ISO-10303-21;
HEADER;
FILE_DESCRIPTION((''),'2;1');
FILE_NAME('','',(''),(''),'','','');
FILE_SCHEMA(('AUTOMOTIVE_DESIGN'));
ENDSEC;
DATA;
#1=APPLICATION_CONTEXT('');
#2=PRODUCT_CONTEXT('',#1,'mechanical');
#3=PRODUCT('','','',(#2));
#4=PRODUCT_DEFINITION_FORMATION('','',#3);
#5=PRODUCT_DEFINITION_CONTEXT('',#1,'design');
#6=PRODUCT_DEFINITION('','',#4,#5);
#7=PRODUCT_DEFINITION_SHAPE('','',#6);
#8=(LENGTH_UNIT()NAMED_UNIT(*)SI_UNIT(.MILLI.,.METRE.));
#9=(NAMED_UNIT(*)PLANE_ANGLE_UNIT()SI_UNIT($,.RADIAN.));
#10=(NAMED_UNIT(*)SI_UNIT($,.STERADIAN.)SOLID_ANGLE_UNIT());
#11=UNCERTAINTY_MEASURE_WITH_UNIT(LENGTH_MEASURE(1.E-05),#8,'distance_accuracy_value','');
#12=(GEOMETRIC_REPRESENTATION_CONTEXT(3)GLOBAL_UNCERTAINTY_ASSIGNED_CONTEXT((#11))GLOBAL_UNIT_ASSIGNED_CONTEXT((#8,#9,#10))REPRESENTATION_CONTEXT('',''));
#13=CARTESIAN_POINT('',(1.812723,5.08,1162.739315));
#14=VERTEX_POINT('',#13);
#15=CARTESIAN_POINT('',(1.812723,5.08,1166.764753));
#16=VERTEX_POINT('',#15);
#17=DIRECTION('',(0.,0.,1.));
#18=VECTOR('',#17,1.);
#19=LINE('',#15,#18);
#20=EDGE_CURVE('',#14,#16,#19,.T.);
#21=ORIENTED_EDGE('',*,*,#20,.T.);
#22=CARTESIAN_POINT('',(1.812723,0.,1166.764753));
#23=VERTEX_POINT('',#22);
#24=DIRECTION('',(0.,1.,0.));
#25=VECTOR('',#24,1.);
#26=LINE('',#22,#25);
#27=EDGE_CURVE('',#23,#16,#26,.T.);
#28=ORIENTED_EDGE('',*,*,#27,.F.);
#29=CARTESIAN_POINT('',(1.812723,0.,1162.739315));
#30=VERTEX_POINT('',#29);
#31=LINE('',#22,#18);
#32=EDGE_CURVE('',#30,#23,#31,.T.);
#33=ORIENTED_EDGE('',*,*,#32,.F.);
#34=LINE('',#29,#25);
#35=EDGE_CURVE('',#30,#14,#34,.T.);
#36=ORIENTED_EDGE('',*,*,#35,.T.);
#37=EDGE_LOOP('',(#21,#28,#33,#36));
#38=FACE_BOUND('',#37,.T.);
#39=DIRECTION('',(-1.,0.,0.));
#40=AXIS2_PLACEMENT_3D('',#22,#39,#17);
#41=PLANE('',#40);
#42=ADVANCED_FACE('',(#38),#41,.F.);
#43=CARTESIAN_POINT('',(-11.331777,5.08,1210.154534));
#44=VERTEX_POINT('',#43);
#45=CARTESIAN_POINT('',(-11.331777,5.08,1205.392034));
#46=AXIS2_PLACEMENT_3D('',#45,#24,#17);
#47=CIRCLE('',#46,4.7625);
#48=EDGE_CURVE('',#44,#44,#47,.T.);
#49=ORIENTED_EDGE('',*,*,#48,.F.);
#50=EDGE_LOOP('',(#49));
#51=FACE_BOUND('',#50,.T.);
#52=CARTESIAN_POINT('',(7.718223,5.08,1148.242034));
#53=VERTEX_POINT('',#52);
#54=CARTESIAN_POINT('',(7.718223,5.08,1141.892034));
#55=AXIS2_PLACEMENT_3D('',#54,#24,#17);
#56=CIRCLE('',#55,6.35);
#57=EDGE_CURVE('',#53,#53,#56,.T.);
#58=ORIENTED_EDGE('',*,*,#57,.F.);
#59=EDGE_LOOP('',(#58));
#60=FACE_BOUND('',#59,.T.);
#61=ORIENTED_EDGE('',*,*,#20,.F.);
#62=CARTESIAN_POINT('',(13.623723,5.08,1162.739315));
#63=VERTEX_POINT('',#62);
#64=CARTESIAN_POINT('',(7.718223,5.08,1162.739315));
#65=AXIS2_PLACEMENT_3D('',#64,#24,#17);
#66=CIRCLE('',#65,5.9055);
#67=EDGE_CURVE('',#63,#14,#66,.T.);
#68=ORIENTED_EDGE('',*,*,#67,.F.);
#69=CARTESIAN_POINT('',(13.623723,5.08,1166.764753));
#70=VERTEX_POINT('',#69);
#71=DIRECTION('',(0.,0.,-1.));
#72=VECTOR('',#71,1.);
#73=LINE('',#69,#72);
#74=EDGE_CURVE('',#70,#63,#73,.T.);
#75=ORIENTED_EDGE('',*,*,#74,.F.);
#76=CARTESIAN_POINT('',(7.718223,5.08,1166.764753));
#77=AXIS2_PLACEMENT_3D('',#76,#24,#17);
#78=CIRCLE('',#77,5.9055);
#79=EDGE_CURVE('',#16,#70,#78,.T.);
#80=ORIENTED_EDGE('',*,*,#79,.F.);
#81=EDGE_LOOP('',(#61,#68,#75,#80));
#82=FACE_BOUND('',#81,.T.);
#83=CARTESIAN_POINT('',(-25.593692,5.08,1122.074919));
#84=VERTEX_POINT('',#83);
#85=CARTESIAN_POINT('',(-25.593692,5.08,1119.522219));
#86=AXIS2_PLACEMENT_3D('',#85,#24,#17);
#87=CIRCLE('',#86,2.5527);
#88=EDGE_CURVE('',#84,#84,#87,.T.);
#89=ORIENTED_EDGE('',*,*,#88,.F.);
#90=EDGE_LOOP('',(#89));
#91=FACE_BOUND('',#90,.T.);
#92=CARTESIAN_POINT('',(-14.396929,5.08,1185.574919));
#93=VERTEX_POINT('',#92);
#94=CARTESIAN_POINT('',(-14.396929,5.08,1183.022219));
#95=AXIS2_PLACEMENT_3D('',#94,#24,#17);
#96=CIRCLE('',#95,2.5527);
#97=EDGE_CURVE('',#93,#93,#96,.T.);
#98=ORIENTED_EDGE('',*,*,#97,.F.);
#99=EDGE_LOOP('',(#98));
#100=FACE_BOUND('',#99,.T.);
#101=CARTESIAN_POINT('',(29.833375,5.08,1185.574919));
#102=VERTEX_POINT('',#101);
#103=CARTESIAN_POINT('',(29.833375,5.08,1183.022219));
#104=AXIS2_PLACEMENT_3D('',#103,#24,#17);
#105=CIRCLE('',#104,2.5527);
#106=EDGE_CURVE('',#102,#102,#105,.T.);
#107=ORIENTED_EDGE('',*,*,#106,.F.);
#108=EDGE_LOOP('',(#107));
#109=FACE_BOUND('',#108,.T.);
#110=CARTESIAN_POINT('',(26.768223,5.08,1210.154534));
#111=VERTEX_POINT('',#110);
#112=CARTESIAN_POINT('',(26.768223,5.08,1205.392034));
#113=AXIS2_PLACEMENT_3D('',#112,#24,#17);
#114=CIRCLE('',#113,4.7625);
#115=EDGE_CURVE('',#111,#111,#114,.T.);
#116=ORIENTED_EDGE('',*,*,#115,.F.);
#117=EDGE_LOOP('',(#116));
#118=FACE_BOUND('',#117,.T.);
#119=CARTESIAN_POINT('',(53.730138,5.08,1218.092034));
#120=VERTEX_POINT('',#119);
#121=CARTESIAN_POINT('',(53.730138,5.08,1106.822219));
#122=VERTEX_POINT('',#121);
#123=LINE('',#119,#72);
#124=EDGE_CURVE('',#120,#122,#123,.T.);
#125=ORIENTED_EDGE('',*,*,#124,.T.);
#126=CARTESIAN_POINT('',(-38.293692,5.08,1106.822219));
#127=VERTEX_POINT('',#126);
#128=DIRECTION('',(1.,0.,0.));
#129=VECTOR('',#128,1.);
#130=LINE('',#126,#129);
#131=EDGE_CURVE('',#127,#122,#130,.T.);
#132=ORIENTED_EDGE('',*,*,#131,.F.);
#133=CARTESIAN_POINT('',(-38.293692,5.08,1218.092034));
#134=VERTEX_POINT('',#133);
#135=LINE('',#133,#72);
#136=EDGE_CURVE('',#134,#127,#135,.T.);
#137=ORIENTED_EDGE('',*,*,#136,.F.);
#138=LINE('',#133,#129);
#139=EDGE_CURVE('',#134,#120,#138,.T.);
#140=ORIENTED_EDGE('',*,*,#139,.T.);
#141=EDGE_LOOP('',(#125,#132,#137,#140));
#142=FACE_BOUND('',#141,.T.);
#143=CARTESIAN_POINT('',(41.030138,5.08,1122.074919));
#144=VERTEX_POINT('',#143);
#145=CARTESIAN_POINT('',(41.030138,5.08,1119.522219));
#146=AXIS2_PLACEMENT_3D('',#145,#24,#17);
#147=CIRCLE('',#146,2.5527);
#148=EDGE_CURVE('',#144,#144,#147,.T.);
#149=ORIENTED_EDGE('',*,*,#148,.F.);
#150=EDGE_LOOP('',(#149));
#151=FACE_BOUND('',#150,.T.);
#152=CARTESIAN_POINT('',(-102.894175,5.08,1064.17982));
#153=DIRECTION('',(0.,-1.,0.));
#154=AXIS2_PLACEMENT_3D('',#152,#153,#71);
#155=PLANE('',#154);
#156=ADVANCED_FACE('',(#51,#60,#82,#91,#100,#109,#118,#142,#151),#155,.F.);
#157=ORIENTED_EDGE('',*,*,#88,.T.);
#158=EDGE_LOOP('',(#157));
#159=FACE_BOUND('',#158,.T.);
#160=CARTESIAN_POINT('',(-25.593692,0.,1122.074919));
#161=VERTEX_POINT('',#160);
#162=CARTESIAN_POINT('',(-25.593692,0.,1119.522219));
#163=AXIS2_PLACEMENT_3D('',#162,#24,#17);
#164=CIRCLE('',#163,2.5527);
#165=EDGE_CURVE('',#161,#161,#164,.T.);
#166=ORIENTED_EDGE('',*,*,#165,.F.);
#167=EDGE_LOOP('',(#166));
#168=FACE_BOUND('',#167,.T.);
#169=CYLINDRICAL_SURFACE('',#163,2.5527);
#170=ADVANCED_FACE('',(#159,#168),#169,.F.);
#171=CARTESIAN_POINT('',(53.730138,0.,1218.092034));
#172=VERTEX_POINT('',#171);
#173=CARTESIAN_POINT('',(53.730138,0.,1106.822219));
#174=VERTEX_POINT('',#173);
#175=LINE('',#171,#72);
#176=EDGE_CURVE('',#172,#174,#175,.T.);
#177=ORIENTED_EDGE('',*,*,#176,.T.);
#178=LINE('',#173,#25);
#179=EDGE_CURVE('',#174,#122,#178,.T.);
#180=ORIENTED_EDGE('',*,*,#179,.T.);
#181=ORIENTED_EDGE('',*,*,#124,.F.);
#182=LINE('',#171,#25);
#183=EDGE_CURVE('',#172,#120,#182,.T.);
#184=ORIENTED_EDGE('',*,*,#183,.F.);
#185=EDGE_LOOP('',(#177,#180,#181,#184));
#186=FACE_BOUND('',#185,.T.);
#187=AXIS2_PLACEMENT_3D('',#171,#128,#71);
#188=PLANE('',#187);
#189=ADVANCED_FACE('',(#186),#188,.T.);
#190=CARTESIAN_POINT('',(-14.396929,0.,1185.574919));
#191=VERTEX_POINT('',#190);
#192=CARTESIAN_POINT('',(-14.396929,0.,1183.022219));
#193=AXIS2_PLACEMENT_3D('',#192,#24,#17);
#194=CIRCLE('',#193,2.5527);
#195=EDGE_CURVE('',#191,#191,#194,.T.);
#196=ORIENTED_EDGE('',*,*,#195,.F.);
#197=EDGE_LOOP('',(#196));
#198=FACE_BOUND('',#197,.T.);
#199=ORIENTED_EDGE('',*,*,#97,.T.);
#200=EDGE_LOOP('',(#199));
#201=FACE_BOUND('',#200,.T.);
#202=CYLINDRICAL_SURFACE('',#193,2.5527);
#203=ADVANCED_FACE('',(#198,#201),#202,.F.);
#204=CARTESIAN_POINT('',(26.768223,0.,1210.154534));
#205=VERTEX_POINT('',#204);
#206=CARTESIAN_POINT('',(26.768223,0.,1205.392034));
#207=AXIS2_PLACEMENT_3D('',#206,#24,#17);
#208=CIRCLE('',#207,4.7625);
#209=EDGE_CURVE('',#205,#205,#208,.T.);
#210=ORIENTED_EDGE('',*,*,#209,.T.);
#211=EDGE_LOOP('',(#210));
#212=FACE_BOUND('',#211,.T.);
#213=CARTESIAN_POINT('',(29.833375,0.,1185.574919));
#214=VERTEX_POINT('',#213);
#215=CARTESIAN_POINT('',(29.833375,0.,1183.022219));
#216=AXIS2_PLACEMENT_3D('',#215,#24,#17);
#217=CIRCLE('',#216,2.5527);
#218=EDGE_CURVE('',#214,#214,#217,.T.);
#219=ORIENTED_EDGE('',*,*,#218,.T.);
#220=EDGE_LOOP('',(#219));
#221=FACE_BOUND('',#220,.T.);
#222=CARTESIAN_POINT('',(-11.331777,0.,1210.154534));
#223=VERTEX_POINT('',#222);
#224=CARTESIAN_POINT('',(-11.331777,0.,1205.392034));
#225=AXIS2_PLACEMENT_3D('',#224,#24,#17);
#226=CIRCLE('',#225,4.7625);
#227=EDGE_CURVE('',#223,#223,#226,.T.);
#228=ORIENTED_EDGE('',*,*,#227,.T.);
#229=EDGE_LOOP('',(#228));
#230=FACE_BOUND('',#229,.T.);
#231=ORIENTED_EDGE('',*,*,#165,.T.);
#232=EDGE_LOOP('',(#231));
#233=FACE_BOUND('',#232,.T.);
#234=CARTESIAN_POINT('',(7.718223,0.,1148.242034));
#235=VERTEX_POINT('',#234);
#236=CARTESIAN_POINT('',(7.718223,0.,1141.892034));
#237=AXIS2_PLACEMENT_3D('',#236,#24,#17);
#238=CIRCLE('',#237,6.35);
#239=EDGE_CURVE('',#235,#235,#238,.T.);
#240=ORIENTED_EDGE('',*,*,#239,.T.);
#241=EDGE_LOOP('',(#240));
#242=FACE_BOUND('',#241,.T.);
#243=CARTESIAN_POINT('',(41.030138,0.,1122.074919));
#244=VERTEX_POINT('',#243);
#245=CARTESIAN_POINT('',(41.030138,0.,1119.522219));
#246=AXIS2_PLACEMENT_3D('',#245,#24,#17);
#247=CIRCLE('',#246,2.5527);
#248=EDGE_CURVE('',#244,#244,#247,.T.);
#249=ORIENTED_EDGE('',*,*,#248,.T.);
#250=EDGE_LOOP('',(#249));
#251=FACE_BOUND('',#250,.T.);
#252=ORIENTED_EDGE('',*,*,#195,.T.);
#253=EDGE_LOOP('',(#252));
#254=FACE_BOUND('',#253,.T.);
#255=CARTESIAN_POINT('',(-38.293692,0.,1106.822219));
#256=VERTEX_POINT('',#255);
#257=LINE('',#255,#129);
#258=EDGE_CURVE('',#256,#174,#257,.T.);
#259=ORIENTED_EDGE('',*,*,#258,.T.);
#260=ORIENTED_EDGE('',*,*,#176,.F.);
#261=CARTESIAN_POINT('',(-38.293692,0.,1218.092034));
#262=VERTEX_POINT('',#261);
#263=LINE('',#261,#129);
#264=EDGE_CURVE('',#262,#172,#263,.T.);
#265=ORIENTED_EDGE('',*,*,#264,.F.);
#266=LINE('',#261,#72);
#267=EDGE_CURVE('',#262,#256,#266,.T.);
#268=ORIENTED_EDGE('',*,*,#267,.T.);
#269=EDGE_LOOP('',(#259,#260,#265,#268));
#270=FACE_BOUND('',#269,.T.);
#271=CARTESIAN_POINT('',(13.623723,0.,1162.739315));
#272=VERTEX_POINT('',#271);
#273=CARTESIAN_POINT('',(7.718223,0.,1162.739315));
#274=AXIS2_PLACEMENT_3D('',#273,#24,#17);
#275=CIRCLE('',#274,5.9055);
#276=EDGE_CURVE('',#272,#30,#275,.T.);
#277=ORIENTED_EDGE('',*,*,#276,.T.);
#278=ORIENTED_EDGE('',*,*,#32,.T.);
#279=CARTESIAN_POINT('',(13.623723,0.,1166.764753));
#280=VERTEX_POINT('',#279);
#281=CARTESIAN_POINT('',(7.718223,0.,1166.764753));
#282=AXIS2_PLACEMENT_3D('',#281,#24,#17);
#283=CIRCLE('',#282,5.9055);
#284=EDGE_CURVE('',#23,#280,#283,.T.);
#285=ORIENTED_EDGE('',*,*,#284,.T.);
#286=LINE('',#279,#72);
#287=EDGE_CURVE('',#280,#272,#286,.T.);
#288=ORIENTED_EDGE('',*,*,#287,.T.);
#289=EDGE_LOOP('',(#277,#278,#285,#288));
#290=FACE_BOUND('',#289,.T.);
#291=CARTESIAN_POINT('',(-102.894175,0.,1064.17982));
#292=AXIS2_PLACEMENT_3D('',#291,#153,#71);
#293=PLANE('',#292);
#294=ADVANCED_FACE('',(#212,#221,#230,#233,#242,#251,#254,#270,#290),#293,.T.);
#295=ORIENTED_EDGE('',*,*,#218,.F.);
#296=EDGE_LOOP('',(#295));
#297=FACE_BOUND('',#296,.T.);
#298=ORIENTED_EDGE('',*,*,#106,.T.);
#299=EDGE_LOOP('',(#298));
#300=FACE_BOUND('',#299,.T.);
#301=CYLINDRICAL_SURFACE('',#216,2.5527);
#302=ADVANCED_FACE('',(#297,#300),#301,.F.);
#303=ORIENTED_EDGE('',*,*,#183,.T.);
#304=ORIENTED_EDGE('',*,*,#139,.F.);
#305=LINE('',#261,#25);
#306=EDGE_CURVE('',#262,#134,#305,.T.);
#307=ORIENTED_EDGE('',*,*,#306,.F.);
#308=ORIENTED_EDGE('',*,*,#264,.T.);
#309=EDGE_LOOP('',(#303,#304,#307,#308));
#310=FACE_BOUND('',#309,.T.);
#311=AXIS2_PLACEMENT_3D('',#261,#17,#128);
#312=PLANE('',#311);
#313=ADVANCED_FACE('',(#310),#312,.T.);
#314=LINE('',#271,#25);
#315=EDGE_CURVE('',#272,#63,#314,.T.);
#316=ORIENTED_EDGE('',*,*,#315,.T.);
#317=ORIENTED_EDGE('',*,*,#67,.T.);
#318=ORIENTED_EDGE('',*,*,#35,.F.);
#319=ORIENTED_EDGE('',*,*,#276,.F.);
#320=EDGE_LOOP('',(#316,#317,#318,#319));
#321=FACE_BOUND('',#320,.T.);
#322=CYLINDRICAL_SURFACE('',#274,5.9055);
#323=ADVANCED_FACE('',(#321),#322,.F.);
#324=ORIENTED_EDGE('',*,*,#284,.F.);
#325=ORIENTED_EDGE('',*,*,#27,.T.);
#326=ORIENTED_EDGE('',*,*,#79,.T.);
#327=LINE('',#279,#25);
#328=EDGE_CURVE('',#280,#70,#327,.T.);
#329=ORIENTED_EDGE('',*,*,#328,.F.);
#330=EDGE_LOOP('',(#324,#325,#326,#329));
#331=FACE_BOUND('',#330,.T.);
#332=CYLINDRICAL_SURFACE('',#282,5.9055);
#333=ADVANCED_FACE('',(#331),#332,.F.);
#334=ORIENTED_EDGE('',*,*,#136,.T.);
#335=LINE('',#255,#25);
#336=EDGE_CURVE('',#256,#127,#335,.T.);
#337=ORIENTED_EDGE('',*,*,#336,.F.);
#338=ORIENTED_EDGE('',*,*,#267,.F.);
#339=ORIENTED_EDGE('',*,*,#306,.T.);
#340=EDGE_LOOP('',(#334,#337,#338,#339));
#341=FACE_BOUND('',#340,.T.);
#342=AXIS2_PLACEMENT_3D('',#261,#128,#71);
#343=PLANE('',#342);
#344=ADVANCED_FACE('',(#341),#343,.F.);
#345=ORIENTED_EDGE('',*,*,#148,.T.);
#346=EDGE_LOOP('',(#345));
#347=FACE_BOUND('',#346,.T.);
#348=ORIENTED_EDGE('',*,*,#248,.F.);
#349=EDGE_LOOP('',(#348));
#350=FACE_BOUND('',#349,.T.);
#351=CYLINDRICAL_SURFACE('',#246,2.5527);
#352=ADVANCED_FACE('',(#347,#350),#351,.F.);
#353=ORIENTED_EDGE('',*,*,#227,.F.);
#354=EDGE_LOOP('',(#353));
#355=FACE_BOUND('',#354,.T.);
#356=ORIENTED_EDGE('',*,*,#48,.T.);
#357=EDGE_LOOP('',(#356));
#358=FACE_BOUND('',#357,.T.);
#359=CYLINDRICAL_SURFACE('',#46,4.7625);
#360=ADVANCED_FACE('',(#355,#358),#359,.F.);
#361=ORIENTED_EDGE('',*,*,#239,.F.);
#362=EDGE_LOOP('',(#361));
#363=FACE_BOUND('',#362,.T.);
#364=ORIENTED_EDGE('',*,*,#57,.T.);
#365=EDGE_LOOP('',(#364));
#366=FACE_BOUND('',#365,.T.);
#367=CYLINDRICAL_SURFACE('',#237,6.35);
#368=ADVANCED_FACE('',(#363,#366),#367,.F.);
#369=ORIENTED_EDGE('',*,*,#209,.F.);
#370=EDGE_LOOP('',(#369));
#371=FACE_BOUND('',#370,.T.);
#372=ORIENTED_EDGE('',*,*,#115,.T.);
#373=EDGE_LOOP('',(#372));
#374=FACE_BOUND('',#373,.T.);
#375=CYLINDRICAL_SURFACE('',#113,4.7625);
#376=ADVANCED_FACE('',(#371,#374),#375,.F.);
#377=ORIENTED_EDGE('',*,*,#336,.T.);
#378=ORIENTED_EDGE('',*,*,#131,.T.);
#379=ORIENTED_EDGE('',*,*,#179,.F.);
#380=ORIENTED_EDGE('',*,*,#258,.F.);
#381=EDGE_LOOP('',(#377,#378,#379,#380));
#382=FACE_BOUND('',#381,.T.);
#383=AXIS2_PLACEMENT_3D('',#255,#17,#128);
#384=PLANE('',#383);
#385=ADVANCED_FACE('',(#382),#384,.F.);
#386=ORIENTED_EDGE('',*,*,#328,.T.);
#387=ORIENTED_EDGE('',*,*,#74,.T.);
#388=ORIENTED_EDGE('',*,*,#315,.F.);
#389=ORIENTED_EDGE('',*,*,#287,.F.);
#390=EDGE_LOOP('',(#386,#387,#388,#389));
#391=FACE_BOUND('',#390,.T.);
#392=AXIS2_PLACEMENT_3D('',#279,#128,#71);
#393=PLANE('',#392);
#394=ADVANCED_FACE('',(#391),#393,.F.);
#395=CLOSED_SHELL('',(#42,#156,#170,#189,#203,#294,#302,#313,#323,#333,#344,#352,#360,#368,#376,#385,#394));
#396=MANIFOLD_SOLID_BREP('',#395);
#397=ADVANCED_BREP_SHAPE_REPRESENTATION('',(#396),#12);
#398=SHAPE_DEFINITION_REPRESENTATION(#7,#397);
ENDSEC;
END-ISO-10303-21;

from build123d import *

# Parameters (mm, degrees)
BOSS_EXTRUDE1_DEPTH          = 5.08
F_3_8_0_375_DIAMETER_HOLE1_D = 9.525
F_3_8_0_375_DIAMETER_HOLE2_D = 9.525
SKETCH8_R                    = 6.35
CUT_EXTRUDE1_DEPTH           = 1371.578062618
SKETCH9_R                    = 2.5527
CUT_EXTRUDE2_DEPTH           = 1371.578062618
SKETCH10_OUTSIDE_W           = 496.242
SKETCH10_OUTSIDE_H           = 717.956
SKETCH10_OUTSIDE_W_2         = 92.023830603
SKETCH10_OUTSIDE_H_2         = 111.269815094
CUT_EXTRUDE3_DEPTH           = 1371.578062618


with BuildPart() as part:
    # Sketch1 → Boss-Extrude1 (new body)
    with BuildSketch(Plane(origin=(0, 0, 0), x_dir=(1, 0, 0), z_dir=(0, 1, 0))):
        with BuildLine():
            Line((186.706216966, -778.102360844), (-171.269771153, -778.102360844))
            add(Edge.make_bspline(
                [(-171.269771153, -778.102360844), (-159.707774454, -836.134775395), (-146.81892484, -893.9188082), (-132.611103769, -951.360767835), (-118.403260068, -1008.802818957), (-102.873342202, -1065.933903144), (-86.045569786, -1122.663773012), (-74.990089761, -1159.934062127), (-63.371281317, -1197.041907081), (-51.194215445, -1233.960969312), (-45.100567198, -1252.436009294), (-38.866841431, -1270.865430421), (-32.494599583, -1289.246240662), (-26.120797202, -1307.631552278), (-20.652525047, -1326.386680917), (-12.917829919, -1344.242199148)],
                knots=[0, 0, 0, 0, 0.177518923, 0.177518923, 0.177518923, 0.355038121, 0.355038121, 0.355038121, 0.471646972, 0.471646972, 0.471646972, 0.529995372, 0.529995372, 0.529995372, 0.588358391, 0.588358391, 0.588358391, 0.588358391], degree=3))
            ThreePointArc((-12.917829919, -1344.242199148), (7.718222897, -1357.79203399), (28.354275723, -1344.242199164))
            add(Edge.make_bspline(
                [(28.354275723, -1344.242199164), (38.120725658, -1321.696381858), (44.939237661, -1298.079369173), (60.823654171, -1251.671639351), (68.544496879, -1228.393431097), (91.029194373, -1158.368706478), (105.122355407, -1111.420274649), (144.723795491, -969.782644477), (167.537266257, -874.315888923), (186.706216966, -778.102360844)],
                knots=[0, 0, 0, 0, 0.125, 0.125, 0.25, 0.25, 0.5, 0.5, 1, 1, 1, 1], degree=3))
        make_face()
    extrude(amount=BOSS_EXTRUDE1_DEPTH)

    # 3/8 (0.375) Diameter Hole1 (through all)
    with Locations(Plane(origin=(0, 5.08, 0), x_dir=(1, 0, 0), z_dir=(0, 1, 0))):
        with Locations((7.718222897, -1326.04203399), (7.718222897, -1300.64203399)):
            Hole(F_3_8_0_375_DIAMETER_HOLE1_D / 2)

    # 3/8 (0.375) Diameter Hole2 (through all)
    with Locations(Plane(origin=(0, 5.08, 0), x_dir=(1, 0, 0), z_dir=(0, 1, 0))):
        with Locations((-49.431777094, -970.44203399), (-49.431777094, -1008.54203399), (64.868222906, -970.44203399), (64.868222906, -1008.54203399), (-11.331777094, -1205.39203399), (26.768222906, -1205.39203399)):
            Hole(F_3_8_0_375_DIAMETER_HOLE2_D / 2)

    # Sketch8 → Cut-Extrude1 (cut, through all)
    with BuildSketch(Plane(origin=(0, 5.08, 0), x_dir=(1, 0, 0), z_dir=(0, 1, 0))):
        with Locations((7.718222906, -1141.89203399)):
            Circle(SKETCH8_R)
        with BuildLine():
            Line((1.812722906, -1166.764753462), (1.812722906, -1162.739314519))
            ThreePointArc((1.812722906, -1162.739314519), (7.718222906, -1156.833814519), (13.623722906, -1162.739314519))
            Line((13.623722906, -1162.739314519), (13.623722906, -1166.764753462))
            ThreePointArc((13.623722906, -1166.764753462), (7.718222906, -1172.670253462), (1.812722906, -1166.764753462))
        make_face()
    extrude(amount=-CUT_EXTRUDE1_DEPTH, mode=Mode.SUBTRACT)

    # Sketch9 → Cut-Extrude2 (cut, through all)
    with BuildSketch(Plane(origin=(0, 5.08, 0), x_dir=(1, 0, 0), z_dir=(0, 1, 0))):
        with Locations((-14.396929121, -1183.022218896)):
            Circle(SKETCH9_R)
        with Locations((29.833374932, -1183.022218896)):
            Circle(SKETCH9_R)
        with Locations((41.030138207, -1119.522218896)):
            Circle(SKETCH9_R)
        with Locations((-25.593692396, -1119.522218896)):
            Circle(SKETCH9_R)
    extrude(amount=-CUT_EXTRUDE2_DEPTH, mode=Mode.SUBTRACT)

    # Sketch10 outside → Cut-Extrude3 (cut, through all)
    with BuildSketch(Plane(origin=(0, 5.08, 0), x_dir=(1, 0, 0), z_dir=(0, 1, 0))):
        with Locations((7.718, -1067.947)):
            Rectangle(SKETCH10_OUTSIDE_W, SKETCH10_OUTSIDE_H)
        with Locations((7.718222905, -1162.457126443)):
            Rectangle(SKETCH10_OUTSIDE_W_2, SKETCH10_OUTSIDE_H_2, mode=Mode.SUBTRACT)
    extrude(amount=-CUT_EXTRUDE3_DEPTH, mode=Mode.SUBTRACT)


solid = part.part
